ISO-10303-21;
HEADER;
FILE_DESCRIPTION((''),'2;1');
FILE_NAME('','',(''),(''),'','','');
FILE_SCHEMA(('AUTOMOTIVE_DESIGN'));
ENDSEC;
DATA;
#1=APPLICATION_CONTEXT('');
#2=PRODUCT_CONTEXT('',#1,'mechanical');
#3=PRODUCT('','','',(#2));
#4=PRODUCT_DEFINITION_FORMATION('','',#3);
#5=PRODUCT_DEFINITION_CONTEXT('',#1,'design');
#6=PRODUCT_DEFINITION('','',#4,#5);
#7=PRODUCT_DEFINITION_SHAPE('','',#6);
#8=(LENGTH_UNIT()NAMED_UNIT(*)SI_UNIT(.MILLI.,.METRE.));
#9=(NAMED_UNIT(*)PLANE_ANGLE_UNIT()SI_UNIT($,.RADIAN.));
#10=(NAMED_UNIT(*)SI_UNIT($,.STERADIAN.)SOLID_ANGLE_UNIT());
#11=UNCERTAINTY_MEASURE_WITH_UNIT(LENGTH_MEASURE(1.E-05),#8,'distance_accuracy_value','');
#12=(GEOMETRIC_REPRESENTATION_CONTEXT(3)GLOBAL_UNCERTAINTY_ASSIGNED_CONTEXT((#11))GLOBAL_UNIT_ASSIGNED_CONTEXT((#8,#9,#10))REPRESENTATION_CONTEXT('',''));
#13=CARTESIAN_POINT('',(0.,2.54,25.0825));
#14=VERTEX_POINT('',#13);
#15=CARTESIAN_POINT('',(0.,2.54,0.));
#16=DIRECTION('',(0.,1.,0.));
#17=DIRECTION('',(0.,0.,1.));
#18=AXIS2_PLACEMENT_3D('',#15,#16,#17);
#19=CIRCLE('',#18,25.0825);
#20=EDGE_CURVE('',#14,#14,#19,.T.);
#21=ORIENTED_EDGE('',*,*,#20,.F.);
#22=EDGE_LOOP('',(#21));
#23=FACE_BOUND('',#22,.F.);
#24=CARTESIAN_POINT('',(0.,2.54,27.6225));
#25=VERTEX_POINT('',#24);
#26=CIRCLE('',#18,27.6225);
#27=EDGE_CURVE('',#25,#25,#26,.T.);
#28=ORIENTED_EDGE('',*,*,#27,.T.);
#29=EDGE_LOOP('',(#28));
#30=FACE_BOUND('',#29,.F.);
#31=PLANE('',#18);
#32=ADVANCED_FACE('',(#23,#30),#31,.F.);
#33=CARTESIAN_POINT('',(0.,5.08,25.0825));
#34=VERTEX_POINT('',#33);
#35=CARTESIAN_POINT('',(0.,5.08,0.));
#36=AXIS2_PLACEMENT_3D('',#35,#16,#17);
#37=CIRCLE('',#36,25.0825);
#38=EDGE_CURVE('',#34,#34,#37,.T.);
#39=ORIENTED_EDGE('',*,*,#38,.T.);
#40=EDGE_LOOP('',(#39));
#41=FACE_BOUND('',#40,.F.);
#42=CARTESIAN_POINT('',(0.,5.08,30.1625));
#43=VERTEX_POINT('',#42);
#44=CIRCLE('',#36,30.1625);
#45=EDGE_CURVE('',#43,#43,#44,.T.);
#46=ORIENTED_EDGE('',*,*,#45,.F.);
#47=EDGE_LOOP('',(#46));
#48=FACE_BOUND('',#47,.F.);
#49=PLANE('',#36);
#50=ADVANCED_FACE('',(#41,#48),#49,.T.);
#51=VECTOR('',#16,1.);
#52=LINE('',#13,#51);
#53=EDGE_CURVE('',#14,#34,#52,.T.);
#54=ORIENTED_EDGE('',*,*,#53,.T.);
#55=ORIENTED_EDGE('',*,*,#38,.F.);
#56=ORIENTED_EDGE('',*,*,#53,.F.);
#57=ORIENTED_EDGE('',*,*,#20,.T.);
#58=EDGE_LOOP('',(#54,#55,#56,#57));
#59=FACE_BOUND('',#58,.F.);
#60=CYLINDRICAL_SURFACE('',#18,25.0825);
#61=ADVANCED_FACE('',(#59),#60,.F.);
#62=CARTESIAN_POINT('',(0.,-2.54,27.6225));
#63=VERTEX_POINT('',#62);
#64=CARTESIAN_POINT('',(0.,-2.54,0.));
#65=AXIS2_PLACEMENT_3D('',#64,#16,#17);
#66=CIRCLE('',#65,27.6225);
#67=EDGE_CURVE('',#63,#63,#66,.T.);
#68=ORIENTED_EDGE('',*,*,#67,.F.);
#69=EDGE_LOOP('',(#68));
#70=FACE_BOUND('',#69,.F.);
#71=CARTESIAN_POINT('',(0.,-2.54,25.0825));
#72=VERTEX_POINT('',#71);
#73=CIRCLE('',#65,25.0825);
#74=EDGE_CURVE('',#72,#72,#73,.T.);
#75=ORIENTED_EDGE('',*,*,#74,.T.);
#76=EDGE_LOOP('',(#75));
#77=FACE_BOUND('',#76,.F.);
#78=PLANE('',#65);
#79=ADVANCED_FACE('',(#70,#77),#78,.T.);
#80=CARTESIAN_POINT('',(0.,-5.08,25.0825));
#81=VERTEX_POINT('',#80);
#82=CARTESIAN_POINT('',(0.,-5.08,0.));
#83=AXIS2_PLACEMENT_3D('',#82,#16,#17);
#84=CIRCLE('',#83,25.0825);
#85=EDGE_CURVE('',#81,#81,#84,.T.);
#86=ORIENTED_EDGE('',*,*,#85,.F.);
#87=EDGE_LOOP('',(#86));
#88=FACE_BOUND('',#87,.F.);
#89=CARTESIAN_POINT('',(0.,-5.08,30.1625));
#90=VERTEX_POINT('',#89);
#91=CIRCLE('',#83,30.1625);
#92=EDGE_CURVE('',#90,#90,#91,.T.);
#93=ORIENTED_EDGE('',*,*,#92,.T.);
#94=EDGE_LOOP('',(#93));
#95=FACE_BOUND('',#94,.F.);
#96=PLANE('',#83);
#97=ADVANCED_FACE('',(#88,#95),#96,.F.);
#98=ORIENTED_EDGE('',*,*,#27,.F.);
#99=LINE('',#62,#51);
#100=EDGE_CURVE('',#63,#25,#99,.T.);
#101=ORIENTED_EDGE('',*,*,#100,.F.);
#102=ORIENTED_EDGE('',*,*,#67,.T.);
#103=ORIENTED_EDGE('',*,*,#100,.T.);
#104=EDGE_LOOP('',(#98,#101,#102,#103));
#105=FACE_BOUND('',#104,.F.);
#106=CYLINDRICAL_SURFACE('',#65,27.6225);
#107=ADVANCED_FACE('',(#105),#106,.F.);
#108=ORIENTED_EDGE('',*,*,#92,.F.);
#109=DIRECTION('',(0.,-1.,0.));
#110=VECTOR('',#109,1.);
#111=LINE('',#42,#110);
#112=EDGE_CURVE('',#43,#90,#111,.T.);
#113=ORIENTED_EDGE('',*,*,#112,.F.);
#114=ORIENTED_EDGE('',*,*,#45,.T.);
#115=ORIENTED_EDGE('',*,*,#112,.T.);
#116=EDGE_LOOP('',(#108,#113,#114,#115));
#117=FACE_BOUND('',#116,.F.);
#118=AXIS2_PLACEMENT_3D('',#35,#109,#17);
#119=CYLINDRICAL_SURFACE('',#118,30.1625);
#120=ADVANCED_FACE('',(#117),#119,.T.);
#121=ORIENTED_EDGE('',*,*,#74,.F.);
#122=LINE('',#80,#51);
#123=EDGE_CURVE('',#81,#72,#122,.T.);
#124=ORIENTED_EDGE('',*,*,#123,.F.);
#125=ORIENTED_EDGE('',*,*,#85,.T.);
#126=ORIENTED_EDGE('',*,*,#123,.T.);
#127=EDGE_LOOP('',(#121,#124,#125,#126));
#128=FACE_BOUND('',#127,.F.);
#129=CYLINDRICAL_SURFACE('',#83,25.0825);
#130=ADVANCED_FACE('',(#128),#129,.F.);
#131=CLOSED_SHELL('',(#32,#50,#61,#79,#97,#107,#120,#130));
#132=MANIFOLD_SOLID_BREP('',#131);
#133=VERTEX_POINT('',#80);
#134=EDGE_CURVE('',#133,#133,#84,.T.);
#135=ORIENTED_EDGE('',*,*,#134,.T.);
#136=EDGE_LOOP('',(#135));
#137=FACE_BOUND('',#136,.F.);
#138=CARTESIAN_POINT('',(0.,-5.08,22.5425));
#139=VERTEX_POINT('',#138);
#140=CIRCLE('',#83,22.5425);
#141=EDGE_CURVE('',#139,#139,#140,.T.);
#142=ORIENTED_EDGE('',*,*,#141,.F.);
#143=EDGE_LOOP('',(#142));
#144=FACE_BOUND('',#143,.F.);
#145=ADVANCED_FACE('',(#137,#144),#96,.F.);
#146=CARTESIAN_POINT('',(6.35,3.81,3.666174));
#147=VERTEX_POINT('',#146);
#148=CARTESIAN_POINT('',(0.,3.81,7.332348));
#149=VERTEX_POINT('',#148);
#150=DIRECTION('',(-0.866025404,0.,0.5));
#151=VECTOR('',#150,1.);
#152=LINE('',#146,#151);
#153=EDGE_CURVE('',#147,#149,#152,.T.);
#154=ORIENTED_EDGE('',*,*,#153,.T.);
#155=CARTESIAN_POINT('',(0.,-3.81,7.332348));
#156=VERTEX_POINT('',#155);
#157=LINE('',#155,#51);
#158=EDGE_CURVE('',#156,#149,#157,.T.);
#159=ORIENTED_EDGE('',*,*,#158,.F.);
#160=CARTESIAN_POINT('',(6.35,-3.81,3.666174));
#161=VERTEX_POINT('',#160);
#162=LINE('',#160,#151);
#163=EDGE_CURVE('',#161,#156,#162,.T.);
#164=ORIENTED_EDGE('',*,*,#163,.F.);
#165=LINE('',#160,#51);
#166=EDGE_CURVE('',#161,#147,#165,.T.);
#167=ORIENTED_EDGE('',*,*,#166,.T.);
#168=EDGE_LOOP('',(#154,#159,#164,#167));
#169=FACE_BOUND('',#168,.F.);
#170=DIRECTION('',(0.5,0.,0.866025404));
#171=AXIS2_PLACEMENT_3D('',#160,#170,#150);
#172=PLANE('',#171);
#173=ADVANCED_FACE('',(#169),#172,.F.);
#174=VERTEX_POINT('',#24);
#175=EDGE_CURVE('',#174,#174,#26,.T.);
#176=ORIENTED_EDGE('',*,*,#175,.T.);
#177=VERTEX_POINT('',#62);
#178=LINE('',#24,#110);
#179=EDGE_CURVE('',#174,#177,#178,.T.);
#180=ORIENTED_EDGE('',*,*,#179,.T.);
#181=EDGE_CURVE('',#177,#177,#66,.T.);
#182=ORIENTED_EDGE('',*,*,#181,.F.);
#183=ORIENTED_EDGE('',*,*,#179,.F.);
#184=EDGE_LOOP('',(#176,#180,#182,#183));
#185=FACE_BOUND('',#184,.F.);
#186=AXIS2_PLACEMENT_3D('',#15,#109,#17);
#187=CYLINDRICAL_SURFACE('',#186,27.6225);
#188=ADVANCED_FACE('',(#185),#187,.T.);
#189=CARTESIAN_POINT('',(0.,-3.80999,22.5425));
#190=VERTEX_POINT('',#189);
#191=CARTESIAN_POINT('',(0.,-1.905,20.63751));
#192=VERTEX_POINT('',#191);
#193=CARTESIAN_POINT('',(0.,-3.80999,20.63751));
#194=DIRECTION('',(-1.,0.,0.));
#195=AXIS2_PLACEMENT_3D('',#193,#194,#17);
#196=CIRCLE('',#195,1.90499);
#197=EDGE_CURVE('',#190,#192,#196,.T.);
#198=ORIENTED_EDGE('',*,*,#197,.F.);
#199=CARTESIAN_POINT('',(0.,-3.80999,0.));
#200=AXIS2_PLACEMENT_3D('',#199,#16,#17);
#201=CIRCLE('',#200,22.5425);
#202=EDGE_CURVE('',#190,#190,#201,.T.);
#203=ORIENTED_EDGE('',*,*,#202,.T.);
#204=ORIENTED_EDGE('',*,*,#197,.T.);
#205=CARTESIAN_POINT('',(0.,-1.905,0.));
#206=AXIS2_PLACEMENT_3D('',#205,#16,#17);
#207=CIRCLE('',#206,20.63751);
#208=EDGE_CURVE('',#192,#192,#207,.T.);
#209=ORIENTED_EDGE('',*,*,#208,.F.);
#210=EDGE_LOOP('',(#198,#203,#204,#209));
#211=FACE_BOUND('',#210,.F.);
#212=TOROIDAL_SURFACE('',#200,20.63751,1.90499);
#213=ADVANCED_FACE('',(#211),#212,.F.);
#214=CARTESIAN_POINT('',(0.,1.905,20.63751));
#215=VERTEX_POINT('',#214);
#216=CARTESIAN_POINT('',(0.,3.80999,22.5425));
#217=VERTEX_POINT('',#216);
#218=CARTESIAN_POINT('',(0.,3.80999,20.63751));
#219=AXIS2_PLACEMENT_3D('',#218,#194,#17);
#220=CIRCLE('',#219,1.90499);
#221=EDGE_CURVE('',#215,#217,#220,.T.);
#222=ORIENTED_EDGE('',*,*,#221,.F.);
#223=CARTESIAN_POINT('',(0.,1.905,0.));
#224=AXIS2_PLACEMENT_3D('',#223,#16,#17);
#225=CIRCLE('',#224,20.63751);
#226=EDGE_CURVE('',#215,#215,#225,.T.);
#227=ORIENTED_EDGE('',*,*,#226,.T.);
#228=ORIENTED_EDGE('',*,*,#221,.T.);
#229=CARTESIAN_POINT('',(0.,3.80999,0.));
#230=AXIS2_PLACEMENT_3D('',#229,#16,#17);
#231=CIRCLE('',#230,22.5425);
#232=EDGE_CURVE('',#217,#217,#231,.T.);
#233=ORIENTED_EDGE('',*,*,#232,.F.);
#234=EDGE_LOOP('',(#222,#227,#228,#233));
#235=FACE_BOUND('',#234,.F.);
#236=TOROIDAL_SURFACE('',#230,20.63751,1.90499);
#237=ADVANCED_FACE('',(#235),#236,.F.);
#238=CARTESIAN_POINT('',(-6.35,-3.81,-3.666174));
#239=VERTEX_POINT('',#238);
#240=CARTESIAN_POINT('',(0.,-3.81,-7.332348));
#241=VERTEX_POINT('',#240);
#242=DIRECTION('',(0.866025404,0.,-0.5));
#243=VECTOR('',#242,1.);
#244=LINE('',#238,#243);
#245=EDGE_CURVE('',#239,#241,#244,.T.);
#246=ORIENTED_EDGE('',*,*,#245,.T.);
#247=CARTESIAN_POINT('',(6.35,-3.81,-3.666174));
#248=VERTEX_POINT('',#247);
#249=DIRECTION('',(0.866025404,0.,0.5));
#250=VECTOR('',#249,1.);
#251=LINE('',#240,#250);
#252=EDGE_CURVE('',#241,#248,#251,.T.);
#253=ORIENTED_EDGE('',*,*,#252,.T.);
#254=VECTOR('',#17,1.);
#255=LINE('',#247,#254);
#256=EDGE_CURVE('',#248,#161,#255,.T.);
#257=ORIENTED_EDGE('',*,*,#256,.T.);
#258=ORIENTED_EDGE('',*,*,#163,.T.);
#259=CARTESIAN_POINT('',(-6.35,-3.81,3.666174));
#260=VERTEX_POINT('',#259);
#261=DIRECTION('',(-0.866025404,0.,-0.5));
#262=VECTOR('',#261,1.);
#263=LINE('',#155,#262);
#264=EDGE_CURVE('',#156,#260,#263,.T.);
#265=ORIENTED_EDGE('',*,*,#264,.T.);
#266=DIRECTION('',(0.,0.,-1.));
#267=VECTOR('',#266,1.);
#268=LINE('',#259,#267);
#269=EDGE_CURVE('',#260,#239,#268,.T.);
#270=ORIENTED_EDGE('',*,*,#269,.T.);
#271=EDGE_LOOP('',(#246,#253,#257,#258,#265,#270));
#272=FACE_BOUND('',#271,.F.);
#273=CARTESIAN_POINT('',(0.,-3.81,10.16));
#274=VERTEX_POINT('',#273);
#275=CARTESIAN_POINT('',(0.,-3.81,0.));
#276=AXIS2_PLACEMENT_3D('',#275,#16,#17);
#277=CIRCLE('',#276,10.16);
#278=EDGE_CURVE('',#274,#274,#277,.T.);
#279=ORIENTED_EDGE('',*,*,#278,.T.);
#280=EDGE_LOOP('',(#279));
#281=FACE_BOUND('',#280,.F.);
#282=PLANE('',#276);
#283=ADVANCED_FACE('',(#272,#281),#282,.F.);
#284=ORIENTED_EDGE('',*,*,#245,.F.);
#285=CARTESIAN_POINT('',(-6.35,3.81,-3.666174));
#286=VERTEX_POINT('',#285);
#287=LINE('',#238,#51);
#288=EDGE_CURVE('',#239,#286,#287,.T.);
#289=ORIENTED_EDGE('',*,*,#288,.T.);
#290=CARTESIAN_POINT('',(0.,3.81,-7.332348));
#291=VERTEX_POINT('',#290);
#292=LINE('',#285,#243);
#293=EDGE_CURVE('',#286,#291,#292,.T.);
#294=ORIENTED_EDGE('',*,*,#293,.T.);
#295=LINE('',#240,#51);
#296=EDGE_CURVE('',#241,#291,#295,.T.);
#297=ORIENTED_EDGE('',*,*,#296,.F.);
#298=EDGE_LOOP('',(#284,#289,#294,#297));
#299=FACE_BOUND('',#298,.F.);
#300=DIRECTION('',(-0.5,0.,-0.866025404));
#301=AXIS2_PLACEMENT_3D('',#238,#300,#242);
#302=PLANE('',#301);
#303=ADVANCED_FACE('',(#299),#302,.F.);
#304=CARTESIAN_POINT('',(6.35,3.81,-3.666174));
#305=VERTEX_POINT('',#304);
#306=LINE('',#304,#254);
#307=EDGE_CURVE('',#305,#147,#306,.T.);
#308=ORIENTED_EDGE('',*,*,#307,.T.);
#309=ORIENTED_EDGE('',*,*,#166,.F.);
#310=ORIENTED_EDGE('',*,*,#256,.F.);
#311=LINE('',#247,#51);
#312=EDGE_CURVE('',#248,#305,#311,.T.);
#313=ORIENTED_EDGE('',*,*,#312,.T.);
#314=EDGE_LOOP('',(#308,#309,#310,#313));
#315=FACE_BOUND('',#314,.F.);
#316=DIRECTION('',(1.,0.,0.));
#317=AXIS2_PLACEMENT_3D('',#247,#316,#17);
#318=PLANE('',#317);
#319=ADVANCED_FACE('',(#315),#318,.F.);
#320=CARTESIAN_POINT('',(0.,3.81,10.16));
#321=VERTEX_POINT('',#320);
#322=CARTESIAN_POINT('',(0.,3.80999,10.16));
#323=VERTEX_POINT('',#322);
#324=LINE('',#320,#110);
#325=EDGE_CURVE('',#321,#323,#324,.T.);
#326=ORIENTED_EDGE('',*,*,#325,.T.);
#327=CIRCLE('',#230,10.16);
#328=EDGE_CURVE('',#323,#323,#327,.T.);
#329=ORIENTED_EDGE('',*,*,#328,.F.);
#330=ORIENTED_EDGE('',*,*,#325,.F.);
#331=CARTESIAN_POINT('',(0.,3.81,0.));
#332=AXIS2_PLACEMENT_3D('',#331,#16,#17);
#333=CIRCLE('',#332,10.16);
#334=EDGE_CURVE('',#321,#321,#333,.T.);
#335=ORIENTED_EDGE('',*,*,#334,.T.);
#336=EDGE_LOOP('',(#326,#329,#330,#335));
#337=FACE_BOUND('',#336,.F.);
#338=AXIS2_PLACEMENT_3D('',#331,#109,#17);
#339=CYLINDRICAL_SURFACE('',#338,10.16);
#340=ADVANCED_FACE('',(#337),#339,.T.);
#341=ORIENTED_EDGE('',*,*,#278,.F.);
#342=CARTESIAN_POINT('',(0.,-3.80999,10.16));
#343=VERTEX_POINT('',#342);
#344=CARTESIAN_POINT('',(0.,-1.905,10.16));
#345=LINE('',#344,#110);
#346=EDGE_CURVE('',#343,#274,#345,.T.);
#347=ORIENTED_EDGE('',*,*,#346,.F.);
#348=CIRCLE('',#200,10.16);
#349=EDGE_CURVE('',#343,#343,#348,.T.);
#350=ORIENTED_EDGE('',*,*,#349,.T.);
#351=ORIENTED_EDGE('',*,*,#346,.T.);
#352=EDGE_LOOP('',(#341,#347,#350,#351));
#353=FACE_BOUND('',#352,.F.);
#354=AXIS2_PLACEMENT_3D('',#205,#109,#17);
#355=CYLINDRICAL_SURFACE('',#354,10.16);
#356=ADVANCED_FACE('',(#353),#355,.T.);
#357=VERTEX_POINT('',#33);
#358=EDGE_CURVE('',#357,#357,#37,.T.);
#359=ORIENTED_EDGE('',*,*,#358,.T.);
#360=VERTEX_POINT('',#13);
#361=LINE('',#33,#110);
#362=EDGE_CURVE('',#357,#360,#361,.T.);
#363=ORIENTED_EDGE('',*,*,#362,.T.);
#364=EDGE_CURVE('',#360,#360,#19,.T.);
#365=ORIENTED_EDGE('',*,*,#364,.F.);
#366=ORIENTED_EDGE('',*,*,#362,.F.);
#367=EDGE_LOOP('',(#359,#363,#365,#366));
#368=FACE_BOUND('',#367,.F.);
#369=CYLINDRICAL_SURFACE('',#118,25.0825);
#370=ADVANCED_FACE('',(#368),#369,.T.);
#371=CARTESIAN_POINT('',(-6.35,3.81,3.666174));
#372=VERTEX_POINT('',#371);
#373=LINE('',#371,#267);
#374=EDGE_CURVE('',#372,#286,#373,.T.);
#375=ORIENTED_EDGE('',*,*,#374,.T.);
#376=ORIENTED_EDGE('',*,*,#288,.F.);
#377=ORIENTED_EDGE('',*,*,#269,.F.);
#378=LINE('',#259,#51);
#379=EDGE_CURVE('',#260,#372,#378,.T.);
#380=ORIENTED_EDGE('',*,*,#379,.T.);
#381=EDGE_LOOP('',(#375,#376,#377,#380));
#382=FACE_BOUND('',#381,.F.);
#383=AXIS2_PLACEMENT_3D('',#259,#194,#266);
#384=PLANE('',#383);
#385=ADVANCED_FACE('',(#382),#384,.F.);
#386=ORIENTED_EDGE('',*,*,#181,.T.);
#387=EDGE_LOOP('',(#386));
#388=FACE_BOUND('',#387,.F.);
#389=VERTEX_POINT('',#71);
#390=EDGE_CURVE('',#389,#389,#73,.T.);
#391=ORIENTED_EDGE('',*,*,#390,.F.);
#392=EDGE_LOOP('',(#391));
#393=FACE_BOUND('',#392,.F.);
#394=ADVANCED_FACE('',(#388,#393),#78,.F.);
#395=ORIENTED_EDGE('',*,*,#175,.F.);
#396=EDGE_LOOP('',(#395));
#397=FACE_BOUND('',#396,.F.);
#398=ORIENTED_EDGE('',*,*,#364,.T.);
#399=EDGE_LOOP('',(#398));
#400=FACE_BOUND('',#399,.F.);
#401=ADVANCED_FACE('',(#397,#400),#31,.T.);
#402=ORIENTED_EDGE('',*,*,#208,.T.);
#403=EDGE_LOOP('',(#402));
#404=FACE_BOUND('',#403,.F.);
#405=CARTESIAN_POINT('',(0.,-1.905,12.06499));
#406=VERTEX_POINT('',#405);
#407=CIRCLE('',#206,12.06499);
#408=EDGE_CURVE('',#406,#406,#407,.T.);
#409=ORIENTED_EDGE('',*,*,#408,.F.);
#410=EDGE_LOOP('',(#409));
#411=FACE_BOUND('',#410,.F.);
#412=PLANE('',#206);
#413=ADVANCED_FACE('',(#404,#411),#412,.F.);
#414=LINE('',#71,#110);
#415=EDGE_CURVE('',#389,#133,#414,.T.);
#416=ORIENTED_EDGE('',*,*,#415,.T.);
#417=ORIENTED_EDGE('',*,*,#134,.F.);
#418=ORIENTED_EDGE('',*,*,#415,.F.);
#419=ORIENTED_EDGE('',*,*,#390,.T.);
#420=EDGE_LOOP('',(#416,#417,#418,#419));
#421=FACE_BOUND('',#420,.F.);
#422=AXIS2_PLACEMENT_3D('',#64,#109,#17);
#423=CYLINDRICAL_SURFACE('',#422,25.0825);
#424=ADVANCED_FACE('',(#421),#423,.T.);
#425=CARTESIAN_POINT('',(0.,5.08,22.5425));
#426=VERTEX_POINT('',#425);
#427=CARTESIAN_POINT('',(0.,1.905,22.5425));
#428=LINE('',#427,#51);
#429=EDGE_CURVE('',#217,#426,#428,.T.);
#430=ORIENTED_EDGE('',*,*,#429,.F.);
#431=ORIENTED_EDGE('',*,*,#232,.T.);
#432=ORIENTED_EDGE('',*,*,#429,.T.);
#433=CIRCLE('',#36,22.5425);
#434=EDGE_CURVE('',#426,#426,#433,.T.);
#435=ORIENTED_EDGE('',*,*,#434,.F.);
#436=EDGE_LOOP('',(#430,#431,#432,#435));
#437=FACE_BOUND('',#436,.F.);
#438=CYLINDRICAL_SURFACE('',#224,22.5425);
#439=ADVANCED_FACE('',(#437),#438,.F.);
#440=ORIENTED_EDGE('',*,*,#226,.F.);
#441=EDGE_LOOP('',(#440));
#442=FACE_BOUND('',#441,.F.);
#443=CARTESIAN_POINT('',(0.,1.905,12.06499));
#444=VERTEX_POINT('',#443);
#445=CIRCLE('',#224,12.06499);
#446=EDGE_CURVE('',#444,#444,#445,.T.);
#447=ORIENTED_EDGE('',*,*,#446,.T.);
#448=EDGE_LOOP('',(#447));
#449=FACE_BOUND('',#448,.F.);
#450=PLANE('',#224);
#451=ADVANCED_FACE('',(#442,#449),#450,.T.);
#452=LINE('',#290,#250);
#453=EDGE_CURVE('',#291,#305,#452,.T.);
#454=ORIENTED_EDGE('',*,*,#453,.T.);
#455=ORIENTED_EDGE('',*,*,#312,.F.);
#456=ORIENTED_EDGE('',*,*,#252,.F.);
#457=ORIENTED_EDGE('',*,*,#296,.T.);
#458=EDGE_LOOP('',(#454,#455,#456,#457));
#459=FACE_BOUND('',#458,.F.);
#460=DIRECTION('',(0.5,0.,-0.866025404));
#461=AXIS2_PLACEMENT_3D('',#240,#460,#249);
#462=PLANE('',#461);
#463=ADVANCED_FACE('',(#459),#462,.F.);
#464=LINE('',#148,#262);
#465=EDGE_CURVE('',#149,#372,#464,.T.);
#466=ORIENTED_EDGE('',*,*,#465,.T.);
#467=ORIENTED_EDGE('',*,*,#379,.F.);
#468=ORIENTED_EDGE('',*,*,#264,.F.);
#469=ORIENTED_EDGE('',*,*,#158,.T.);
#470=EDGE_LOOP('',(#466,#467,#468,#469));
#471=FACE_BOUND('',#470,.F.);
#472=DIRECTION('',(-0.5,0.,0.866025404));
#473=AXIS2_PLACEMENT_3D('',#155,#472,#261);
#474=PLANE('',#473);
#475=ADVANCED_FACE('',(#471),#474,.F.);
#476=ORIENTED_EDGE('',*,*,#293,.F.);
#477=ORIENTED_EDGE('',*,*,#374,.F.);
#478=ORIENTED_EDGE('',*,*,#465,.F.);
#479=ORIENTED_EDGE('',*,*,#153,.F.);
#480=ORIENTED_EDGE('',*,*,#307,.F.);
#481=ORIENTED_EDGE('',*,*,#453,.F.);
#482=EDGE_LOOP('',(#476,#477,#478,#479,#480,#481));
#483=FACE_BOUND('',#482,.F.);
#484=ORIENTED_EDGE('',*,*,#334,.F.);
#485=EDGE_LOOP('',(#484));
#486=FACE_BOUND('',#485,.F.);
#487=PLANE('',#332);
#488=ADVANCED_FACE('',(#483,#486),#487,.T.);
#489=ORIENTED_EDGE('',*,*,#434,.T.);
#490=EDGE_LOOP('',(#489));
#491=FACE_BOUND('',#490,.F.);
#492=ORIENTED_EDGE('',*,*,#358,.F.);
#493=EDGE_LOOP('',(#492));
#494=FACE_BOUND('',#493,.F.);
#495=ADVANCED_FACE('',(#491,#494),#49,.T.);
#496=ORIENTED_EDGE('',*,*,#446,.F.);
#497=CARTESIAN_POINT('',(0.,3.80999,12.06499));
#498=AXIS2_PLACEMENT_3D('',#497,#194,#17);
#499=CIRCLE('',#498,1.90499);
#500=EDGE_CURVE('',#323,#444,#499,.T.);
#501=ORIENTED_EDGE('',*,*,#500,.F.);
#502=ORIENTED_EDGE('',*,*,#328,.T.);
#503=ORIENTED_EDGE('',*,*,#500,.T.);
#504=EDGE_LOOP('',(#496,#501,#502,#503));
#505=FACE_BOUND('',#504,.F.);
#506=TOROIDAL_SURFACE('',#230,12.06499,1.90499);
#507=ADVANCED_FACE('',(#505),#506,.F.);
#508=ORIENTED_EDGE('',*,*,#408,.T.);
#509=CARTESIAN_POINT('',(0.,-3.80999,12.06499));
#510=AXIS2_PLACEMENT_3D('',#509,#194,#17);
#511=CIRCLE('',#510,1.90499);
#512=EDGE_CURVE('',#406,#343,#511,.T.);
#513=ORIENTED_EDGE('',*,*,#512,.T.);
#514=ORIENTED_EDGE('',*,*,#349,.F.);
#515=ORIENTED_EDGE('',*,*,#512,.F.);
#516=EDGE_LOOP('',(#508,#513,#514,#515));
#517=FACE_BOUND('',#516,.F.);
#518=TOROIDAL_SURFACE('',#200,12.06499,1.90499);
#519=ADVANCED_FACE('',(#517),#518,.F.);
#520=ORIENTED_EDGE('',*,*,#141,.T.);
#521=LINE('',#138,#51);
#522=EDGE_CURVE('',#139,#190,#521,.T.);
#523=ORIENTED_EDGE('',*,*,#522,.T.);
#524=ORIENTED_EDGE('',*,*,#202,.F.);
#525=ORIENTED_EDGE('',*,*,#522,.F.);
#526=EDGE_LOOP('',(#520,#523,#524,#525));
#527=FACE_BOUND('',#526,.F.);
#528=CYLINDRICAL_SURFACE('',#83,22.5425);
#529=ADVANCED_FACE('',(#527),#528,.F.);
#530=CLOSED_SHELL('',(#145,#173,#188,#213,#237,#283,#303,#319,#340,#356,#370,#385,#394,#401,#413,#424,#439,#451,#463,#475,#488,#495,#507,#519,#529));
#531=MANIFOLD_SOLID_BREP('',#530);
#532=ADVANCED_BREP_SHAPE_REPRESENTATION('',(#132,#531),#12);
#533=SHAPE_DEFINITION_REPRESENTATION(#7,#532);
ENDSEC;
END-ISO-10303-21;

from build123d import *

# Parameters (mm, degrees)
F2_R     = 1.90499
F4_DEPTH = 7.62


# Not quite as in the source:
# - a fillet or chamfer is up to 0.001 mm smaller than in the source, because OpenCascade refuses the exact size


with BuildPart() as f1:
    # F0 (on Right) → F1 (revolve)
    with BuildSketch(Plane.YZ):
        Polygon((-3.81, 10.16), (-3.81, 0), (3.81, 0), (3.81, 10.16), (1.905, 10.16), (1.905, 22.5425), (5.08, 22.5425), (5.08, 25.0825), (2.54, 25.0825), (2.54, 27.6225), (-2.54, 27.6225), (-2.54, 25.0825), (-5.08, 25.0825), (-5.08, 22.5425), (-1.905, 22.5425), (-1.905, 10.16), align=None)
    revolve(axis=Axis((0, 0, 0), (0, 1, 0)))

    # F2 (radius 1.905 in the source; OpenCascade refuses exactly that, so slightly less here)
    f2_edges = [f1.edges().sort_by_distance(p)[0] for p in [
        (0, 1.905, -10.16),
        (0, 1.905, -22.5425),
        (0, -1.905, -10.16),
        (0, -1.905, -22.5425),
    ]]
    fillet(f2_edges, radius=F2_R)

    # F3 (on face) → F4 (cut, through all)
    with BuildSketch(Plane.XZ.offset(3.81)):
        Polygon((6.35, -3.6661742094), (6.35, 3.6661742094), (0, 7.3323484187), (-6.35, 3.6661742094), (-6.35, -3.6661742094), (0, -7.3323484187), align=None)
    extrude(amount=-F4_DEPTH, mode=Mode.SUBTRACT)


with BuildPart() as f6:
    # F5 (on Right) → F6 (revolve)
    with BuildSketch(Plane.YZ):
        Polygon((-5.08, 30.1625), (-5.08, 25.0825), (-2.54, 25.0825), (-2.54, 27.6225), (2.54, 27.6225), (2.54, 25.0825), (5.08, 25.0825), (5.08, 30.1625), align=None)
    revolve(axis=Axis((0, 0, 0), (0, 1, 0)))


solid = Compound([f1.part, f6.part])
